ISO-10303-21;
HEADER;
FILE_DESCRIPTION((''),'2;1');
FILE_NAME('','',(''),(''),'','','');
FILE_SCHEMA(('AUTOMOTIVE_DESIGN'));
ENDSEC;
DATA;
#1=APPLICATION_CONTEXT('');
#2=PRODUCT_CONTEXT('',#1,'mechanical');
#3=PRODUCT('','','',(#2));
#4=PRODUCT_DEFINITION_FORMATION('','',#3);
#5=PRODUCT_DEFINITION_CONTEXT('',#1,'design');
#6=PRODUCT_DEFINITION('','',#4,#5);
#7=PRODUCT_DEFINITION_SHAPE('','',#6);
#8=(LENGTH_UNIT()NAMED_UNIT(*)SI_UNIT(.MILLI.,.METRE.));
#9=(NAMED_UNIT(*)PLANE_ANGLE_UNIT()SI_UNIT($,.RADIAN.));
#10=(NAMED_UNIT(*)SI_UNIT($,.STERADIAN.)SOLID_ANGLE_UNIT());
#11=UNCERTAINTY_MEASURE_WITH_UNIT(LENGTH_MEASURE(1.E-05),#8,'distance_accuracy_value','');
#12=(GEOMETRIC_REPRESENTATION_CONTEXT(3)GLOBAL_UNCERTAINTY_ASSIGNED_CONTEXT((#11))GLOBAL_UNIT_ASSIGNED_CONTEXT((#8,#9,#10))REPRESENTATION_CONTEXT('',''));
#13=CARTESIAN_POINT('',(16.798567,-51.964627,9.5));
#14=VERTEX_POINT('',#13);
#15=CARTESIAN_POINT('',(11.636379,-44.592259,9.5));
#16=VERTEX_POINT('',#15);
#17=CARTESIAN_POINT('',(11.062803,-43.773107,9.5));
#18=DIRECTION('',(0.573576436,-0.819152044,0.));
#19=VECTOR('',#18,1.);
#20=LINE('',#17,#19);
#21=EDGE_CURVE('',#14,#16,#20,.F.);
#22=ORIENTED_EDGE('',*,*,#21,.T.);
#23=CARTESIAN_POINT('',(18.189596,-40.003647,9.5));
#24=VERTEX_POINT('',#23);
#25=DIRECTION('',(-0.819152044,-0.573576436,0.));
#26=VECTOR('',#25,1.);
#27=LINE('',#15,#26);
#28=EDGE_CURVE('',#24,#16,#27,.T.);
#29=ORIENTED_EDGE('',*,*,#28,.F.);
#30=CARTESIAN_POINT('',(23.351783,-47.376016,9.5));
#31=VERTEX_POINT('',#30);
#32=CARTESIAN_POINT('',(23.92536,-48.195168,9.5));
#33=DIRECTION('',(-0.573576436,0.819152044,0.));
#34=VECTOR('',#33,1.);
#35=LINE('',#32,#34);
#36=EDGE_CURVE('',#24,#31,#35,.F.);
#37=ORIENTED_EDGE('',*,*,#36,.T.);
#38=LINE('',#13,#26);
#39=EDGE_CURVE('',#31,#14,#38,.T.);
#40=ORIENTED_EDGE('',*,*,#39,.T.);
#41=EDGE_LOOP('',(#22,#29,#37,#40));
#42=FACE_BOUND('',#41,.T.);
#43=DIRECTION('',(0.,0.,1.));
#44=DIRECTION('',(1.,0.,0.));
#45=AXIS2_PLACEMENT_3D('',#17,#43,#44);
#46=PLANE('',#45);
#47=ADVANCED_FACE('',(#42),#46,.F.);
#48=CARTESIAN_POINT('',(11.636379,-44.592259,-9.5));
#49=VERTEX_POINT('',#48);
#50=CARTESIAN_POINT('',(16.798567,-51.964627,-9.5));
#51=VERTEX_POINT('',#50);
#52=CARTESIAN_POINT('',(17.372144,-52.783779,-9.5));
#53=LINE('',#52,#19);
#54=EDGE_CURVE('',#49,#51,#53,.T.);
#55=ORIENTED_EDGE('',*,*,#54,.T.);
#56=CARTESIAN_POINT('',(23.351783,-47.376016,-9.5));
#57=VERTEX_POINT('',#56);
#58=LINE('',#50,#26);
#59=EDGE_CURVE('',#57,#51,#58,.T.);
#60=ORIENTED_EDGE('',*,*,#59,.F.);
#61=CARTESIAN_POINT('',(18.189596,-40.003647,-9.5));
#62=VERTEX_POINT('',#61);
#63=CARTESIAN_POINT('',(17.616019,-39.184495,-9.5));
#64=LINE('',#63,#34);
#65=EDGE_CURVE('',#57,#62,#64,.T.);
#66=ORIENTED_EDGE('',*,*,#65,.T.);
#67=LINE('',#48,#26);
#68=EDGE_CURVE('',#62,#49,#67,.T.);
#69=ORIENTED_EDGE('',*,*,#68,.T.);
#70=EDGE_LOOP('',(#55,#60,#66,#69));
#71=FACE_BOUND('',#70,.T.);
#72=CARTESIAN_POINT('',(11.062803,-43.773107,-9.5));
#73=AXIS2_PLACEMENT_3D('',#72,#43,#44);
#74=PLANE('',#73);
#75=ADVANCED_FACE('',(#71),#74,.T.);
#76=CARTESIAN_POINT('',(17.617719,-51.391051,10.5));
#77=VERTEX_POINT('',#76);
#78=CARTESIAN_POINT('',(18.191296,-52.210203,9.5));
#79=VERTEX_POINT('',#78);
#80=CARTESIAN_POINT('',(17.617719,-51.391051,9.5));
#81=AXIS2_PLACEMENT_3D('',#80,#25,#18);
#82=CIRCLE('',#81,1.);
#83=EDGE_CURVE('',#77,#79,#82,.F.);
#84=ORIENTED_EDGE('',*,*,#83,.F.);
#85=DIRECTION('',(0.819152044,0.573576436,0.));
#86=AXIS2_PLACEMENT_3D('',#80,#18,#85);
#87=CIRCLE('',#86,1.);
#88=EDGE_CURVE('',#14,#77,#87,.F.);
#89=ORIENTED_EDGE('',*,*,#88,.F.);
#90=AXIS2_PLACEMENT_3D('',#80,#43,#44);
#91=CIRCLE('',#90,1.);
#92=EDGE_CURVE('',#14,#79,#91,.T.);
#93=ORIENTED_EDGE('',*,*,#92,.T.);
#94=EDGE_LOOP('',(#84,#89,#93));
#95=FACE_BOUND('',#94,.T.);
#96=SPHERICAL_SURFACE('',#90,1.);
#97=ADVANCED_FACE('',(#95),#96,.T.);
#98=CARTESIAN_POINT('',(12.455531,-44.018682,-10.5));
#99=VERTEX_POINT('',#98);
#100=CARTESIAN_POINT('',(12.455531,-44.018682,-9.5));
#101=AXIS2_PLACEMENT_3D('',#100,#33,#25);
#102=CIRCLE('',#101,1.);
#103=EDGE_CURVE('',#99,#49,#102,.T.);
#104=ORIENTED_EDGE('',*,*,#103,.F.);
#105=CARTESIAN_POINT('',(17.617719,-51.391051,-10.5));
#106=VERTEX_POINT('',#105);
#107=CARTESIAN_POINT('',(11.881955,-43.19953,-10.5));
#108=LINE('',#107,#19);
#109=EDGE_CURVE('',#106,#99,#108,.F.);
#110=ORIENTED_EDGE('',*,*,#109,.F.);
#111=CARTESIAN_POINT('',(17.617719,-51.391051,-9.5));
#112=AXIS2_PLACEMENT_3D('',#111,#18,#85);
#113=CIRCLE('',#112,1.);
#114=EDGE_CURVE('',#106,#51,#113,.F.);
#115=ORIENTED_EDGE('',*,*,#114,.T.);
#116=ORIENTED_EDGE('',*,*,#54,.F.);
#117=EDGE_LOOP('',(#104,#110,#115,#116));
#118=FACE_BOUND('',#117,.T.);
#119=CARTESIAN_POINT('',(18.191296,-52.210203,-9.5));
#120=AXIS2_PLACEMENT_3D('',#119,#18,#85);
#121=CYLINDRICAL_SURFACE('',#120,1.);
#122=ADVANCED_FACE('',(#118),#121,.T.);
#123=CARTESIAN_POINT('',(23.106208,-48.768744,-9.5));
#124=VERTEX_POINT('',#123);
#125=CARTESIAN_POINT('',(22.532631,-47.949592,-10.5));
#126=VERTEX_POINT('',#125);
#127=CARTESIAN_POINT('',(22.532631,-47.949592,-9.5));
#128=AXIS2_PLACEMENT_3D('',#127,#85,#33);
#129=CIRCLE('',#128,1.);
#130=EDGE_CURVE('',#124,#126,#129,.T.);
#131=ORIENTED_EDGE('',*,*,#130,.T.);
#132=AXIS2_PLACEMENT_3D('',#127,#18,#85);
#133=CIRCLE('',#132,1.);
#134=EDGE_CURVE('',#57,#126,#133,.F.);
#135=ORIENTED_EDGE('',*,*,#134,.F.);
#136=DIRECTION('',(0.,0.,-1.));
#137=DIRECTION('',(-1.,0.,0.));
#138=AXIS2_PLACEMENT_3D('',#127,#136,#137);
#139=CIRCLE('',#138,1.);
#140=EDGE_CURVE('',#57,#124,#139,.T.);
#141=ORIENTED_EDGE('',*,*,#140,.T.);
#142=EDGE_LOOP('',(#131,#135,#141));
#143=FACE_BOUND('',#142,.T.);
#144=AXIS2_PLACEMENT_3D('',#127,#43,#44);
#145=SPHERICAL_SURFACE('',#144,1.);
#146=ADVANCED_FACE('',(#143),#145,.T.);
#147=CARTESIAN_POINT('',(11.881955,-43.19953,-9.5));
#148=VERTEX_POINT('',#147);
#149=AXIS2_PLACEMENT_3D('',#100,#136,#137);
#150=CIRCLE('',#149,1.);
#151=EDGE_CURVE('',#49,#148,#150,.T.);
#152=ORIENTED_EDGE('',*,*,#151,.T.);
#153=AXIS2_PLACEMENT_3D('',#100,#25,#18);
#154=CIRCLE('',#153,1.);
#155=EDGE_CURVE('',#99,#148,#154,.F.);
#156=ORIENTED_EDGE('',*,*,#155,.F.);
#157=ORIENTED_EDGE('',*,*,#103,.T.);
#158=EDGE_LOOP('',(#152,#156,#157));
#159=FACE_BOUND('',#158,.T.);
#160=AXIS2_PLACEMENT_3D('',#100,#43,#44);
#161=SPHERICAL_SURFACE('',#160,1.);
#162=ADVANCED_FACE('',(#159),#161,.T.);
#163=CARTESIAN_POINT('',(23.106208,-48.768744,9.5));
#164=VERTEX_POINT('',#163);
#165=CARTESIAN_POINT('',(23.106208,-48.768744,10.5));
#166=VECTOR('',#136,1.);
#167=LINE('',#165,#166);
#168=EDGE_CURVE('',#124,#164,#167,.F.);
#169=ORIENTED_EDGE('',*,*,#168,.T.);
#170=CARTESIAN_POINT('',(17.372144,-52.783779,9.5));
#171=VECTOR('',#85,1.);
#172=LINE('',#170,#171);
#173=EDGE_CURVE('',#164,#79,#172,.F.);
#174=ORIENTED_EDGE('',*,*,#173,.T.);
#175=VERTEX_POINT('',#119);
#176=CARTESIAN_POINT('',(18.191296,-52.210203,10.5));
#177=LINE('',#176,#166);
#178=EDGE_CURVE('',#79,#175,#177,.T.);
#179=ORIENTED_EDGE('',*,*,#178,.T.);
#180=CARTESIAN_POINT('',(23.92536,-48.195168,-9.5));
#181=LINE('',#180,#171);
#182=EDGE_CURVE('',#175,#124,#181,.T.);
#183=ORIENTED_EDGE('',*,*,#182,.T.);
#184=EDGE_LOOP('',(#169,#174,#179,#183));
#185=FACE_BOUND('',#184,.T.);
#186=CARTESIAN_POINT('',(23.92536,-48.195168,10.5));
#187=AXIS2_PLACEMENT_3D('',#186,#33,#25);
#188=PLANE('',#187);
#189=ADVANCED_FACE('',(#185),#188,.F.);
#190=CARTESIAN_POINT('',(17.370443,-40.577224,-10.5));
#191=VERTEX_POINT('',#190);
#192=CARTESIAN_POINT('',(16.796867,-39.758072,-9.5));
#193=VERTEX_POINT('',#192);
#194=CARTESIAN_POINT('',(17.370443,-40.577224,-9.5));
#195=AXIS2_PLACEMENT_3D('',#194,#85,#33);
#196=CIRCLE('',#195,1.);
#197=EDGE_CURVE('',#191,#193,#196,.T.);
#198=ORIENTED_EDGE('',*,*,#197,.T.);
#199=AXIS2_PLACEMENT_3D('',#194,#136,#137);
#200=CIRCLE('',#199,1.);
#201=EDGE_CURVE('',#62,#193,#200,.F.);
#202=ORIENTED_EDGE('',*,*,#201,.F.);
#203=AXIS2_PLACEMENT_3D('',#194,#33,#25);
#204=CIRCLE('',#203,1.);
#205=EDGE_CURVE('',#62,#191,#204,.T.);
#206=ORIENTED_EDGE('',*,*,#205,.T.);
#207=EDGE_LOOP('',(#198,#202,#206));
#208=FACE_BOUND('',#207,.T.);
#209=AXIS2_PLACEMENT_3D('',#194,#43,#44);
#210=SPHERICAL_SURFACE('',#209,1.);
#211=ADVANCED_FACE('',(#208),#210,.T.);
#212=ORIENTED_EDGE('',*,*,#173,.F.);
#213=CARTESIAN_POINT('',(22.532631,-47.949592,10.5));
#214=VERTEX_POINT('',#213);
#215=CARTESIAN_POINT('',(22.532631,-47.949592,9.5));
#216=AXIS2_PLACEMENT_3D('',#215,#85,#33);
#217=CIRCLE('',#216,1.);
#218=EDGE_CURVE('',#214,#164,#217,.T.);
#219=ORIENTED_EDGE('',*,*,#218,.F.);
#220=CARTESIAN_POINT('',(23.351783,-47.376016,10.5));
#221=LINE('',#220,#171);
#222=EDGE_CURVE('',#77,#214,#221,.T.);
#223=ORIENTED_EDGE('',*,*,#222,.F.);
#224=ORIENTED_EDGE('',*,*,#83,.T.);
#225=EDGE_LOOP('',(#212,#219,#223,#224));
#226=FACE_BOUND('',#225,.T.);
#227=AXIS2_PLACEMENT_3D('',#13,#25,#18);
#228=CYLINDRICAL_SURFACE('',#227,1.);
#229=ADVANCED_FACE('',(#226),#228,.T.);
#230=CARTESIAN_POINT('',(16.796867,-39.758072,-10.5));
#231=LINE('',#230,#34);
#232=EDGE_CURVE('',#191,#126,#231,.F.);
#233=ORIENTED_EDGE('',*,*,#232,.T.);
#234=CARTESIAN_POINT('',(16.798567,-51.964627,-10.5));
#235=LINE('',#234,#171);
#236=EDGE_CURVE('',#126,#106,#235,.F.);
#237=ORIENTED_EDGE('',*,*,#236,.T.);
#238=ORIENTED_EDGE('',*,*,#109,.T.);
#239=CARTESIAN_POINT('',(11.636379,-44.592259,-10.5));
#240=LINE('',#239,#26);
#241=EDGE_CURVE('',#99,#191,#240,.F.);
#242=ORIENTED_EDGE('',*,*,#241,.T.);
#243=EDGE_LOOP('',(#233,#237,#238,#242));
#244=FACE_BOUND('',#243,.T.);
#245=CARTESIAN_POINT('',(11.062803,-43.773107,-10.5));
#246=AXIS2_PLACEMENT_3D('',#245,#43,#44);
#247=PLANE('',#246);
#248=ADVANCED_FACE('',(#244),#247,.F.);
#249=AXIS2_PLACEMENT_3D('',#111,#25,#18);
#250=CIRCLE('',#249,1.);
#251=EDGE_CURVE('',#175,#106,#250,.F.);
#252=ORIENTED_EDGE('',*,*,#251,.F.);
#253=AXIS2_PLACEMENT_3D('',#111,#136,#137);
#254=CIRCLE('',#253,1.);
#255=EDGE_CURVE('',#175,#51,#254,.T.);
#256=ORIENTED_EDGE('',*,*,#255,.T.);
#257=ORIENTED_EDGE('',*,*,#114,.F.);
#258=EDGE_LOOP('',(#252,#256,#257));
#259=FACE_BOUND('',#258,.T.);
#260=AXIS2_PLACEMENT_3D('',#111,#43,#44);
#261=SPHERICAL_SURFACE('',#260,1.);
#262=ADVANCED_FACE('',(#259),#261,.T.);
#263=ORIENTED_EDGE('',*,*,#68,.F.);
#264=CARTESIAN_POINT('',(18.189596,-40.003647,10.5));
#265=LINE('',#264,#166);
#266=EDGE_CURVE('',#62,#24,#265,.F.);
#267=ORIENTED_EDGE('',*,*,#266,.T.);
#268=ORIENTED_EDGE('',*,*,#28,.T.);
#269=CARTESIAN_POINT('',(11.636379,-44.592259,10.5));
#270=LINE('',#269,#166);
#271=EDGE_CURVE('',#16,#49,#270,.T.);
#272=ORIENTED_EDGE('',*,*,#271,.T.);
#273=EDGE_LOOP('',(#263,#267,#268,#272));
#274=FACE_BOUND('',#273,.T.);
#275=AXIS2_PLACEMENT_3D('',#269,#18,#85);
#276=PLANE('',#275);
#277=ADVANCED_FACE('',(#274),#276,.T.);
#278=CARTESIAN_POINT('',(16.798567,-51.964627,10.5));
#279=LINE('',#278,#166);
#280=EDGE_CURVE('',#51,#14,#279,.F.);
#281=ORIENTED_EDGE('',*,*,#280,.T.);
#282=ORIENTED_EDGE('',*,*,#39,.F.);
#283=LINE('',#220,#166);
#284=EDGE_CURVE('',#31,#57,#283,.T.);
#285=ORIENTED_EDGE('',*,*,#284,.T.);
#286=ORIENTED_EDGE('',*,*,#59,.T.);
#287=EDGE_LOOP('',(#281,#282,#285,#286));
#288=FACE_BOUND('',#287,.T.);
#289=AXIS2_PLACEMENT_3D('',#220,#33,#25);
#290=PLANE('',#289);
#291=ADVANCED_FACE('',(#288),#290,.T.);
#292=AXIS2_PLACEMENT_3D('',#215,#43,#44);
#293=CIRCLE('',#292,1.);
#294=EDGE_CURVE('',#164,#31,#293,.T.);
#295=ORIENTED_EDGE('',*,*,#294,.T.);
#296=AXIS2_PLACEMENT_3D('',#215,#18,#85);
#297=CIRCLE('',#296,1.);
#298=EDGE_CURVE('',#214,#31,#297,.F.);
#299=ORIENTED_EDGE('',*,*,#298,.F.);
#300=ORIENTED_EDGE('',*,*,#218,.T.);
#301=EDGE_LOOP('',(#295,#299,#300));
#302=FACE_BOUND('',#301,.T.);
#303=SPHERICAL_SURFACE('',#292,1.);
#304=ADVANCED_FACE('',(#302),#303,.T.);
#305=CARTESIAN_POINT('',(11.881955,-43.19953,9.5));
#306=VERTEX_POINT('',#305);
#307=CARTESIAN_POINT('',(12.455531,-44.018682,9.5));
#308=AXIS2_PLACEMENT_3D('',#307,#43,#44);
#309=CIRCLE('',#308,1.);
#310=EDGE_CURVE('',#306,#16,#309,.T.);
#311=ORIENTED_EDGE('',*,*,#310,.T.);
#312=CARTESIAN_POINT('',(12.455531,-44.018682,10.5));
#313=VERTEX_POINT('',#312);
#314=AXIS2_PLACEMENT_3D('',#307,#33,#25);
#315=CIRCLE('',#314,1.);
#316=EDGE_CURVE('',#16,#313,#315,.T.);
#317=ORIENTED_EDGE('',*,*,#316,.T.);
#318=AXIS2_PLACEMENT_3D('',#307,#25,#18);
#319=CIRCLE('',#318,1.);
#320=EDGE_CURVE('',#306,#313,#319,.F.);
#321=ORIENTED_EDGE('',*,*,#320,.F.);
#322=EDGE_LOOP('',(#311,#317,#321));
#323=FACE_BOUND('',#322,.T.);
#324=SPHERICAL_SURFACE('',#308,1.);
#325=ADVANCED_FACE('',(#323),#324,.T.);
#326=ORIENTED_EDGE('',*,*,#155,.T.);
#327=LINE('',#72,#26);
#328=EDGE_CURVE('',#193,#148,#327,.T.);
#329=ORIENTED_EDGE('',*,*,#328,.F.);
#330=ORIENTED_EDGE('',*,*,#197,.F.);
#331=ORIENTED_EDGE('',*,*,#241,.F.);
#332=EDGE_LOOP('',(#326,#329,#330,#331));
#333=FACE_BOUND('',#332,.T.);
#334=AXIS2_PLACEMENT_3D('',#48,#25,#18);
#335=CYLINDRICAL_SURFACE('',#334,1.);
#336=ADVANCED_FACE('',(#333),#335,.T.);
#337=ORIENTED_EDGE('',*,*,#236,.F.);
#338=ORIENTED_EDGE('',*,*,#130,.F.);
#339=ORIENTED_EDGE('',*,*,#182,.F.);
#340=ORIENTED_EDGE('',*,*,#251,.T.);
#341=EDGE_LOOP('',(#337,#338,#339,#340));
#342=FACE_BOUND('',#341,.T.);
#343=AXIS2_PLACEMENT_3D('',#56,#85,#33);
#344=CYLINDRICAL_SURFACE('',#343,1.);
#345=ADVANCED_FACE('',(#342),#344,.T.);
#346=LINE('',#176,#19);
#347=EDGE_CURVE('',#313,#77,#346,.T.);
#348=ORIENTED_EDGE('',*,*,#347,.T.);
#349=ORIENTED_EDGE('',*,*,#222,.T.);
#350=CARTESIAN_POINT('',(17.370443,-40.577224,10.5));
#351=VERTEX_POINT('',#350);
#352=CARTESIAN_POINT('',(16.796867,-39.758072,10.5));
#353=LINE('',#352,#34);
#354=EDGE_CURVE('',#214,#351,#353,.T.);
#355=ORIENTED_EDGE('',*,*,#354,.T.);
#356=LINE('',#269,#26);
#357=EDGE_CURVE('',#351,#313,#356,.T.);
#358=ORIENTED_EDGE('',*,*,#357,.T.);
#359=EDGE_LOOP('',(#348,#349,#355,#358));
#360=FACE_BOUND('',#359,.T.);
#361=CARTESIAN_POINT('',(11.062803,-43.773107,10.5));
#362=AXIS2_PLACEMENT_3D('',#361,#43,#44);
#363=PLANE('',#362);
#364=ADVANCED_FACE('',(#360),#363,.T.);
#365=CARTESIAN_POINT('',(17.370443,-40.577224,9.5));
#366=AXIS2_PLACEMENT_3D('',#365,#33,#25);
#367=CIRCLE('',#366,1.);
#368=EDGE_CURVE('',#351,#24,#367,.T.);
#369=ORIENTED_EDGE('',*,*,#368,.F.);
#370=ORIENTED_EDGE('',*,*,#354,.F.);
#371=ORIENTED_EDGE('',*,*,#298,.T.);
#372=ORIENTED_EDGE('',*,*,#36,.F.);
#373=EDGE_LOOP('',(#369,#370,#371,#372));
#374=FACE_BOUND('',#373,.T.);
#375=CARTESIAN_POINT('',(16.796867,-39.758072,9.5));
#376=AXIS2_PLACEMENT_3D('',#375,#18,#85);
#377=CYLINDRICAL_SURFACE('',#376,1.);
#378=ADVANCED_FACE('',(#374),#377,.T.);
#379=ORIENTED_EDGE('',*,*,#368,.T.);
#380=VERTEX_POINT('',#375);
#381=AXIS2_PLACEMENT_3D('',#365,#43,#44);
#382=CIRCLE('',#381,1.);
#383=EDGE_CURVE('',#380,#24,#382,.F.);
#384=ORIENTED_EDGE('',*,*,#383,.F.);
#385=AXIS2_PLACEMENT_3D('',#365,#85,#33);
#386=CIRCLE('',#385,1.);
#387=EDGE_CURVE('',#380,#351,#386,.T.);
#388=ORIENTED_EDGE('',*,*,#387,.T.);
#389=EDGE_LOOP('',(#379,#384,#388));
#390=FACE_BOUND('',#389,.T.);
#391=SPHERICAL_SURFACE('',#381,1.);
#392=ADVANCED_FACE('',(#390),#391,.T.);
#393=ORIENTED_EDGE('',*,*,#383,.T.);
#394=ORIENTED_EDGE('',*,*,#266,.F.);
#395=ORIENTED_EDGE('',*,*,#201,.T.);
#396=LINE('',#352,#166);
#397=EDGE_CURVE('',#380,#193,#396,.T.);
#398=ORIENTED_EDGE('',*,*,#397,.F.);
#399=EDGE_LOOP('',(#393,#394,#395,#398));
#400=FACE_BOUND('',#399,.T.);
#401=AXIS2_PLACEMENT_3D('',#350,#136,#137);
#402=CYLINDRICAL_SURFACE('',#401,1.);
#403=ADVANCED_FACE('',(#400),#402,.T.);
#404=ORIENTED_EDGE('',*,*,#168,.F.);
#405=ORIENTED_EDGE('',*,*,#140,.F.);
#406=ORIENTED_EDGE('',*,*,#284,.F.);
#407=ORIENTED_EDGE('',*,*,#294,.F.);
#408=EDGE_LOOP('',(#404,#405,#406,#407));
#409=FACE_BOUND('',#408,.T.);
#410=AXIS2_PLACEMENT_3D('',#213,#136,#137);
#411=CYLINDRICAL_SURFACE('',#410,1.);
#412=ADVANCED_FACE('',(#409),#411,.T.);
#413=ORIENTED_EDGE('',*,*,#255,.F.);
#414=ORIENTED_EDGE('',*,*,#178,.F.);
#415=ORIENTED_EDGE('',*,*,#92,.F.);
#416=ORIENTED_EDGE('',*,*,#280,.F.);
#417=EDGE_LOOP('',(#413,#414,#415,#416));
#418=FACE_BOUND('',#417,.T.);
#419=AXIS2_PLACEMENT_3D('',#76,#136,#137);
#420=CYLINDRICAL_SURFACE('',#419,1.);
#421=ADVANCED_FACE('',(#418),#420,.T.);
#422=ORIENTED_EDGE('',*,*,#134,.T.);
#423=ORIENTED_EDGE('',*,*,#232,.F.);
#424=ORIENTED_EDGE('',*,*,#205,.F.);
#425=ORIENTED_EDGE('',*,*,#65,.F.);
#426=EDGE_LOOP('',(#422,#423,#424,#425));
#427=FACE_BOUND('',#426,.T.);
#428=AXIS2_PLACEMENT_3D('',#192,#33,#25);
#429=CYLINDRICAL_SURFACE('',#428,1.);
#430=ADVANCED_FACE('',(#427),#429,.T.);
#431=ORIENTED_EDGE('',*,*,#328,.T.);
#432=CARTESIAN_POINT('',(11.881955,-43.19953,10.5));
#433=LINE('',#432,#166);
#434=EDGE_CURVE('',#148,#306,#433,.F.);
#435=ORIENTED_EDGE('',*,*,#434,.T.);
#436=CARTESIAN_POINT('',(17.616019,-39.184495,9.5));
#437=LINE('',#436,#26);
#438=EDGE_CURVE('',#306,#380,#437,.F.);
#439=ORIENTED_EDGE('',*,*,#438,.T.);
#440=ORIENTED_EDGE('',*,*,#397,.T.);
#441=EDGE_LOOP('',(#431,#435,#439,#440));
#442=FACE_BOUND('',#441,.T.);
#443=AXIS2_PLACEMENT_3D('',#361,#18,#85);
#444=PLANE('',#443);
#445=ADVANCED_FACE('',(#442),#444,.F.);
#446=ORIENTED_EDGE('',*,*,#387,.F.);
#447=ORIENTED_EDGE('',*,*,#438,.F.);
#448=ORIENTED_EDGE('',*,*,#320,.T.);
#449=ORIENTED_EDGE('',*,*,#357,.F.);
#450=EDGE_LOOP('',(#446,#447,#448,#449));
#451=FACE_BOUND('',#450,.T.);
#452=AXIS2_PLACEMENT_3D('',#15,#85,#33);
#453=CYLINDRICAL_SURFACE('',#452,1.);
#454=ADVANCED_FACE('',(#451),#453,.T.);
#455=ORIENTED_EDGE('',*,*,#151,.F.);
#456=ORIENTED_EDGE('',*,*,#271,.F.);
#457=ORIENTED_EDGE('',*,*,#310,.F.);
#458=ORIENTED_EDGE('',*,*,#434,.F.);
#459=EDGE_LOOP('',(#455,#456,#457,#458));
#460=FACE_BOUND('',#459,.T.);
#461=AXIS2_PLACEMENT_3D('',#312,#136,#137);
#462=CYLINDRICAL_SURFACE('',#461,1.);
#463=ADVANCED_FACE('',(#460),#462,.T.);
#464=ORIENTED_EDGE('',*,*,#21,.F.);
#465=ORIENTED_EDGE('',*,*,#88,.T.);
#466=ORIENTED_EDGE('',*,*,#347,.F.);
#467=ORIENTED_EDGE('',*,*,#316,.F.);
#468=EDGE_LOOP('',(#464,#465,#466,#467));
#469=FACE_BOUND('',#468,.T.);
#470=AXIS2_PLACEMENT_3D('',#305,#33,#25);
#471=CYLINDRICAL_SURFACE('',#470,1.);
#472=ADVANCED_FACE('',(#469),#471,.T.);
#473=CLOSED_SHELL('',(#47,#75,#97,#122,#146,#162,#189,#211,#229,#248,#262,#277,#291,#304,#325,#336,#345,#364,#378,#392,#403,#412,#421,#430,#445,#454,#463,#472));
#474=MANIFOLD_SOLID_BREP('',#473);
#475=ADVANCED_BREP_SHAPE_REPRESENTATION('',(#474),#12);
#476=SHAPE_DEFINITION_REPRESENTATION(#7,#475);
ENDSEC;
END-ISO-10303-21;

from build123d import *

# Parameters (mm, degrees)
BASE_EXTRUDE_DEPTH = 10.5
FILLET1_R          = 1
SHELL1_START       = 43.20219293
SHELL1_OUTLINE_W   = 8
SHELL1_OUTLINE_H   = 19
SHELL1_DEPTH       = 9


# Read off the part's stored shape, not the designer's step: Shell1
with BuildPart() as part:
    # Sketch1 → Base-Extrude (new, symmetric)
    with BuildSketch(Plane.XY):
        Polygon((17.372143532, -52.78377934), (11.062802732, -43.773106853), (17.616019086, -39.184495362), (23.925359886, -48.195167849), align=None)
    extrude(amount=BASE_EXTRUDE_DEPTH, both=True)

    # Fillet1
    fillet1_edges = [part.edges().sort_by_distance(p)[0] for p in [
        (20.648751709, -50.489473594, 10.5),
        (20.770689486, -43.689831605, 10.5),
        (14.339410909, -41.478801107, 10.5),
        (20.770689486, -43.689831605, -10.5),
        (20.648751709, -50.489473594, -10.5),
        (14.217473132, -48.278443096, -10.5),
        (14.339410909, -41.478801107, -10.5),
        (14.217473132, -48.278443096, 10.5),
        (17.616019086, -39.184495362, 0),
        (23.925359886, -48.195167849, 0),
        (17.372143532, -52.78377934, 0),
        (11.062802732, -43.773106853, 0),
    ]]
    fillet(fillet1_edges, radius=FILLET1_R)

    # Shell1 outline → Shell1 (cut)
    with BuildSketch(Plane(origin=(0, 0, 0), x_dir=(0.8191520442889926, 0.5735764363510448, 0), z_dir=(0.5735764363510448, -0.8191520442889927, 0)).offset(SHELL1_START)):
        with Locations((-12.045105163, 0)):
            Rectangle(SHELL1_OUTLINE_W, SHELL1_OUTLINE_H)
    extrude(amount=SHELL1_DEPTH, mode=Mode.SUBTRACT)


solid = part.part
